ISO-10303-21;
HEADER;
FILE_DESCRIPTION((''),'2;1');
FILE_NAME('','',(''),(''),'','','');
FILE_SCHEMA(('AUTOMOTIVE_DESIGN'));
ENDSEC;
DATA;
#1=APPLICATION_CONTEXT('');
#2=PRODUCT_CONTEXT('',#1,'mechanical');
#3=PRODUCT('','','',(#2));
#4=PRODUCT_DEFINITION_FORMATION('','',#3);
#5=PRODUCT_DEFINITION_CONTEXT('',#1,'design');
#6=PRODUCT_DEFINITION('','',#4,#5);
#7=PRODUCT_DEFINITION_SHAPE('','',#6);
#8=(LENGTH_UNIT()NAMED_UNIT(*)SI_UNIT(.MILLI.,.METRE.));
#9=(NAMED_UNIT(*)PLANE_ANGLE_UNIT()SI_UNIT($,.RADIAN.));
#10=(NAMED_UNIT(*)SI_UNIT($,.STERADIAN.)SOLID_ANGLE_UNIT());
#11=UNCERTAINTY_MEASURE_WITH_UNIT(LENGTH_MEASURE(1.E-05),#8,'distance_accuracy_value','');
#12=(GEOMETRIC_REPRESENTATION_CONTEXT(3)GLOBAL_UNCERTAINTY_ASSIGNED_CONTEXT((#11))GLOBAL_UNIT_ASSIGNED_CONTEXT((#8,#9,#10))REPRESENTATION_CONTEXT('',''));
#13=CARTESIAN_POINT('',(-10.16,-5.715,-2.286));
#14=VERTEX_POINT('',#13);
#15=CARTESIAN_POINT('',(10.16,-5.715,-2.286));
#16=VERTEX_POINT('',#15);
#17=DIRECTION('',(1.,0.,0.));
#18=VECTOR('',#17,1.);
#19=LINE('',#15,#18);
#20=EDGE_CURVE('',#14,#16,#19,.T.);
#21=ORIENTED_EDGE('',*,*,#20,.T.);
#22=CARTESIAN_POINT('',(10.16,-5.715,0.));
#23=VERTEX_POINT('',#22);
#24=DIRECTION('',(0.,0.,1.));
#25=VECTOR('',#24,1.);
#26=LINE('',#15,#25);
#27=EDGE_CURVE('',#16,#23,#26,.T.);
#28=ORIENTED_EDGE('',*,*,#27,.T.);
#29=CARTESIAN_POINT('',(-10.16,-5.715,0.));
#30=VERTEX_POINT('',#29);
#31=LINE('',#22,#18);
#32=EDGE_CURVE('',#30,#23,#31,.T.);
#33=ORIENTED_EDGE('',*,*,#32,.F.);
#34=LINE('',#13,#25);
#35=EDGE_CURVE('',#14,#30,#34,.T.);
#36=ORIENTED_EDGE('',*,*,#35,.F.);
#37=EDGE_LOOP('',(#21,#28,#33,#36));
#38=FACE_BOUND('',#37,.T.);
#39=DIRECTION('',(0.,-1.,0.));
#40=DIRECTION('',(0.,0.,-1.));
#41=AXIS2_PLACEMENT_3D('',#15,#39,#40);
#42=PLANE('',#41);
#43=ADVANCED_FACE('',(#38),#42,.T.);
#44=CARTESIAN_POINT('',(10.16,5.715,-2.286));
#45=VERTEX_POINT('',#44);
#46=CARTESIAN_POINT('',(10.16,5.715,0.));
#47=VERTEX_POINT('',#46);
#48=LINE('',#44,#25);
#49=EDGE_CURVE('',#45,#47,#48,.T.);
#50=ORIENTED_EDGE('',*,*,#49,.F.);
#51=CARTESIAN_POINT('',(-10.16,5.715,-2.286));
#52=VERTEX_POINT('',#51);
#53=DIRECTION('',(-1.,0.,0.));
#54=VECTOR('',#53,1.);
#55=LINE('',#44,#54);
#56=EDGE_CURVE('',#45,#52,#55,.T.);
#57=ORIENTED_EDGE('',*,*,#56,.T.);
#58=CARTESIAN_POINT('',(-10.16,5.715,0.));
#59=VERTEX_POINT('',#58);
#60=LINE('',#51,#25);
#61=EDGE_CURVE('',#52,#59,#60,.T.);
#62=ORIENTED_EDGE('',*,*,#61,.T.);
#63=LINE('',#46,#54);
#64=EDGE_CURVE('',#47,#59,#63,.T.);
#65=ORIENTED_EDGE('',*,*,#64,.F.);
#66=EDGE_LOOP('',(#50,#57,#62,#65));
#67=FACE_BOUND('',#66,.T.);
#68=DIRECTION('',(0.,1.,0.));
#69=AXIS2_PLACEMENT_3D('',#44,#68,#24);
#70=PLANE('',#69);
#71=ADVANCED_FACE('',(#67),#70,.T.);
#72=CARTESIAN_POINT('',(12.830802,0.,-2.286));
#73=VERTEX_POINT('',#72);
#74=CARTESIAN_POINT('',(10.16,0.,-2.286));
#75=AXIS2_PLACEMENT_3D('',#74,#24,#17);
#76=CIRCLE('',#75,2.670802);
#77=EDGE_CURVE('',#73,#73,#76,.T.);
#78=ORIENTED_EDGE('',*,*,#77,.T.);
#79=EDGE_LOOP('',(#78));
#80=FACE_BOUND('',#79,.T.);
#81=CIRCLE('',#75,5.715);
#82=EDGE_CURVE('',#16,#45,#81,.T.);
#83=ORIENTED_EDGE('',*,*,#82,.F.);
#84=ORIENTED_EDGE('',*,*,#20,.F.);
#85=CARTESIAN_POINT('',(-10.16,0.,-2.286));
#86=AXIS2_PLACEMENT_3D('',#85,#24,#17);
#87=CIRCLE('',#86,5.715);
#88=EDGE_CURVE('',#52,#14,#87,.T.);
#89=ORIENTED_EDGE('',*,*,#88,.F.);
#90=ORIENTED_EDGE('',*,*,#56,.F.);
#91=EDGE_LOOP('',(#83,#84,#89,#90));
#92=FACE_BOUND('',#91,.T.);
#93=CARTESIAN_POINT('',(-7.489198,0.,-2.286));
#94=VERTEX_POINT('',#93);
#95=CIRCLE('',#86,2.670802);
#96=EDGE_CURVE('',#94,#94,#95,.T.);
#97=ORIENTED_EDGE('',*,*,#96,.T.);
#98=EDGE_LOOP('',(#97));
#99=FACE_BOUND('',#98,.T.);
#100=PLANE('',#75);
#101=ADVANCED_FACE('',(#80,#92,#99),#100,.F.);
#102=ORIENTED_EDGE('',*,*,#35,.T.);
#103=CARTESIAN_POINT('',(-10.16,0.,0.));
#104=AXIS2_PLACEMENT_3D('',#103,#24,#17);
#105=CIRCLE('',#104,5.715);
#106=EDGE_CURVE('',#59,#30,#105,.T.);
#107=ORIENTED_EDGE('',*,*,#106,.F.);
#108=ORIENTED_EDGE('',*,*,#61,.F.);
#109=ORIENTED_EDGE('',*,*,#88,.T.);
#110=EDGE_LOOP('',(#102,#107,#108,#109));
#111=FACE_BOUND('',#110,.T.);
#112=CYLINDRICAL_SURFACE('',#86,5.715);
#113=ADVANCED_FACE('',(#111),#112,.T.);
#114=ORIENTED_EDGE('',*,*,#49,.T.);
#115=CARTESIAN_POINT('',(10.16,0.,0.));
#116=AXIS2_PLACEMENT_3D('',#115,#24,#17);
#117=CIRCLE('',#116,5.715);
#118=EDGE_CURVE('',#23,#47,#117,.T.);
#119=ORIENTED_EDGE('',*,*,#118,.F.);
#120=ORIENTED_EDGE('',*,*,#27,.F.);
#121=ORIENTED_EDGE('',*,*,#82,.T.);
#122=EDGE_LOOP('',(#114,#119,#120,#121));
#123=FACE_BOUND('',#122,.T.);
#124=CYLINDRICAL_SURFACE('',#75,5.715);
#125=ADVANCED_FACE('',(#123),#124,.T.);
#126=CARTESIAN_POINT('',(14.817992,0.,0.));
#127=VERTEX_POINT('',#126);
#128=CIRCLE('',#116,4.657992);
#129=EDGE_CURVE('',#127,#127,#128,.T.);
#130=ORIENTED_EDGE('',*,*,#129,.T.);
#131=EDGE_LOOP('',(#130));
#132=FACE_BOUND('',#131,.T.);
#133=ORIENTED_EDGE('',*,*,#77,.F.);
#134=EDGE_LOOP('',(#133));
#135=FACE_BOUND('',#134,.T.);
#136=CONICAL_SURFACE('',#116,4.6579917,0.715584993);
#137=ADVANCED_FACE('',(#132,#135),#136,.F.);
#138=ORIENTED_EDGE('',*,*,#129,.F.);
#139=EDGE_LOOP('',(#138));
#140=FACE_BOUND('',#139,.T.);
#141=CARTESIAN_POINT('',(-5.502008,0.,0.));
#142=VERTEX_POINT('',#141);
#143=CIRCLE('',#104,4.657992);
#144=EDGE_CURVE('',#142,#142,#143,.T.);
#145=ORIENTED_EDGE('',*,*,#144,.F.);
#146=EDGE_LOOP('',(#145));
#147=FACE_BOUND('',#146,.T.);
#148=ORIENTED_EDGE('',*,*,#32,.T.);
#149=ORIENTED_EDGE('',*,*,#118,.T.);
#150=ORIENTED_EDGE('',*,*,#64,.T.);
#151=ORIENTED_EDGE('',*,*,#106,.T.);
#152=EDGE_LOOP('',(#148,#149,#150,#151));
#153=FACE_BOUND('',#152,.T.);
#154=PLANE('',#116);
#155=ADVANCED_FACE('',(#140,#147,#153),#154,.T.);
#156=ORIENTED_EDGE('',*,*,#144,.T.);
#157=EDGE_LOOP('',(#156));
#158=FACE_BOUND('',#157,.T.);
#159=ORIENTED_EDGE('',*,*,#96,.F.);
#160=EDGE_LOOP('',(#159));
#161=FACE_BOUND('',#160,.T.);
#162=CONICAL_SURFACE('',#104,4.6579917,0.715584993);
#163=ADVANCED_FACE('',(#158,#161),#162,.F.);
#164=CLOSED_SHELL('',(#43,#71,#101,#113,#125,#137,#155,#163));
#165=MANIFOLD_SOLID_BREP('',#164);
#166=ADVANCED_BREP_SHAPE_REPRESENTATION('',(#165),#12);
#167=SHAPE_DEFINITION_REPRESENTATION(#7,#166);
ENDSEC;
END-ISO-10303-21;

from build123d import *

# Parameters (mm, degrees)
BASE_FLANGE1_DEPTH                            = 2.286
CSK_FOR_8_FLAT_HEAD_MACHINE_SCREW1_AT_2_COUNT = 2
CSK_FOR_8_FLAT_HEAD_MACHINE_SCREW1_AT_2_PITCH = 20.32


# Sheet-metal steps are written as plain solids
with BuildPart() as part:
    # Sketch1 → Base-Flange1 (new body)
    with BuildSketch(Plane.XY):
        with BuildLine():
            Line((10.16, -5.715), (-10.16, -5.715))
            ThreePointArc((-10.16, -5.715), (-15.875, 0), (-10.16, 5.715))
            Line((-10.16, 5.715), (10.16, 5.715))
            ThreePointArc((10.16, 5.715), (15.875, 0), (10.16, -5.715))
        make_face()
    extrude(amount=-BASE_FLANGE1_DEPTH)

    # Sketch4 → CSK for #8 Flat Head Machine Screw1 (revolve, cut)
    with BuildSketch(Plane(origin=(-10.16, 0, 0), x_dir=(0, -1, 0), z_dir=(1, 0, 0))):
        Polygon((0, 0), (0, 2.286), (2.2479, 2.286), (2.2479, 2.77249335), (4.6579917, 0), align=None)
    csk_for_8_flat_head_machine_screw1 = revolve(axis=Axis((-10.16, 0, 6.35), (0, 0, -1)), mode=Mode.SUBTRACT)

    # CSK for #8 Flat Head Machine Screw1 at 2: CSK for #8 Flat Head Machine Screw1 ×2
    with Locations(*[(i * CSK_FOR_8_FLAT_HEAD_MACHINE_SCREW1_AT_2_PITCH, 0, 0) for i in range(1, CSK_FOR_8_FLAT_HEAD_MACHINE_SCREW1_AT_2_COUNT)]):
        add(csk_for_8_flat_head_machine_screw1, mode=Mode.SUBTRACT)


solid = part.part
